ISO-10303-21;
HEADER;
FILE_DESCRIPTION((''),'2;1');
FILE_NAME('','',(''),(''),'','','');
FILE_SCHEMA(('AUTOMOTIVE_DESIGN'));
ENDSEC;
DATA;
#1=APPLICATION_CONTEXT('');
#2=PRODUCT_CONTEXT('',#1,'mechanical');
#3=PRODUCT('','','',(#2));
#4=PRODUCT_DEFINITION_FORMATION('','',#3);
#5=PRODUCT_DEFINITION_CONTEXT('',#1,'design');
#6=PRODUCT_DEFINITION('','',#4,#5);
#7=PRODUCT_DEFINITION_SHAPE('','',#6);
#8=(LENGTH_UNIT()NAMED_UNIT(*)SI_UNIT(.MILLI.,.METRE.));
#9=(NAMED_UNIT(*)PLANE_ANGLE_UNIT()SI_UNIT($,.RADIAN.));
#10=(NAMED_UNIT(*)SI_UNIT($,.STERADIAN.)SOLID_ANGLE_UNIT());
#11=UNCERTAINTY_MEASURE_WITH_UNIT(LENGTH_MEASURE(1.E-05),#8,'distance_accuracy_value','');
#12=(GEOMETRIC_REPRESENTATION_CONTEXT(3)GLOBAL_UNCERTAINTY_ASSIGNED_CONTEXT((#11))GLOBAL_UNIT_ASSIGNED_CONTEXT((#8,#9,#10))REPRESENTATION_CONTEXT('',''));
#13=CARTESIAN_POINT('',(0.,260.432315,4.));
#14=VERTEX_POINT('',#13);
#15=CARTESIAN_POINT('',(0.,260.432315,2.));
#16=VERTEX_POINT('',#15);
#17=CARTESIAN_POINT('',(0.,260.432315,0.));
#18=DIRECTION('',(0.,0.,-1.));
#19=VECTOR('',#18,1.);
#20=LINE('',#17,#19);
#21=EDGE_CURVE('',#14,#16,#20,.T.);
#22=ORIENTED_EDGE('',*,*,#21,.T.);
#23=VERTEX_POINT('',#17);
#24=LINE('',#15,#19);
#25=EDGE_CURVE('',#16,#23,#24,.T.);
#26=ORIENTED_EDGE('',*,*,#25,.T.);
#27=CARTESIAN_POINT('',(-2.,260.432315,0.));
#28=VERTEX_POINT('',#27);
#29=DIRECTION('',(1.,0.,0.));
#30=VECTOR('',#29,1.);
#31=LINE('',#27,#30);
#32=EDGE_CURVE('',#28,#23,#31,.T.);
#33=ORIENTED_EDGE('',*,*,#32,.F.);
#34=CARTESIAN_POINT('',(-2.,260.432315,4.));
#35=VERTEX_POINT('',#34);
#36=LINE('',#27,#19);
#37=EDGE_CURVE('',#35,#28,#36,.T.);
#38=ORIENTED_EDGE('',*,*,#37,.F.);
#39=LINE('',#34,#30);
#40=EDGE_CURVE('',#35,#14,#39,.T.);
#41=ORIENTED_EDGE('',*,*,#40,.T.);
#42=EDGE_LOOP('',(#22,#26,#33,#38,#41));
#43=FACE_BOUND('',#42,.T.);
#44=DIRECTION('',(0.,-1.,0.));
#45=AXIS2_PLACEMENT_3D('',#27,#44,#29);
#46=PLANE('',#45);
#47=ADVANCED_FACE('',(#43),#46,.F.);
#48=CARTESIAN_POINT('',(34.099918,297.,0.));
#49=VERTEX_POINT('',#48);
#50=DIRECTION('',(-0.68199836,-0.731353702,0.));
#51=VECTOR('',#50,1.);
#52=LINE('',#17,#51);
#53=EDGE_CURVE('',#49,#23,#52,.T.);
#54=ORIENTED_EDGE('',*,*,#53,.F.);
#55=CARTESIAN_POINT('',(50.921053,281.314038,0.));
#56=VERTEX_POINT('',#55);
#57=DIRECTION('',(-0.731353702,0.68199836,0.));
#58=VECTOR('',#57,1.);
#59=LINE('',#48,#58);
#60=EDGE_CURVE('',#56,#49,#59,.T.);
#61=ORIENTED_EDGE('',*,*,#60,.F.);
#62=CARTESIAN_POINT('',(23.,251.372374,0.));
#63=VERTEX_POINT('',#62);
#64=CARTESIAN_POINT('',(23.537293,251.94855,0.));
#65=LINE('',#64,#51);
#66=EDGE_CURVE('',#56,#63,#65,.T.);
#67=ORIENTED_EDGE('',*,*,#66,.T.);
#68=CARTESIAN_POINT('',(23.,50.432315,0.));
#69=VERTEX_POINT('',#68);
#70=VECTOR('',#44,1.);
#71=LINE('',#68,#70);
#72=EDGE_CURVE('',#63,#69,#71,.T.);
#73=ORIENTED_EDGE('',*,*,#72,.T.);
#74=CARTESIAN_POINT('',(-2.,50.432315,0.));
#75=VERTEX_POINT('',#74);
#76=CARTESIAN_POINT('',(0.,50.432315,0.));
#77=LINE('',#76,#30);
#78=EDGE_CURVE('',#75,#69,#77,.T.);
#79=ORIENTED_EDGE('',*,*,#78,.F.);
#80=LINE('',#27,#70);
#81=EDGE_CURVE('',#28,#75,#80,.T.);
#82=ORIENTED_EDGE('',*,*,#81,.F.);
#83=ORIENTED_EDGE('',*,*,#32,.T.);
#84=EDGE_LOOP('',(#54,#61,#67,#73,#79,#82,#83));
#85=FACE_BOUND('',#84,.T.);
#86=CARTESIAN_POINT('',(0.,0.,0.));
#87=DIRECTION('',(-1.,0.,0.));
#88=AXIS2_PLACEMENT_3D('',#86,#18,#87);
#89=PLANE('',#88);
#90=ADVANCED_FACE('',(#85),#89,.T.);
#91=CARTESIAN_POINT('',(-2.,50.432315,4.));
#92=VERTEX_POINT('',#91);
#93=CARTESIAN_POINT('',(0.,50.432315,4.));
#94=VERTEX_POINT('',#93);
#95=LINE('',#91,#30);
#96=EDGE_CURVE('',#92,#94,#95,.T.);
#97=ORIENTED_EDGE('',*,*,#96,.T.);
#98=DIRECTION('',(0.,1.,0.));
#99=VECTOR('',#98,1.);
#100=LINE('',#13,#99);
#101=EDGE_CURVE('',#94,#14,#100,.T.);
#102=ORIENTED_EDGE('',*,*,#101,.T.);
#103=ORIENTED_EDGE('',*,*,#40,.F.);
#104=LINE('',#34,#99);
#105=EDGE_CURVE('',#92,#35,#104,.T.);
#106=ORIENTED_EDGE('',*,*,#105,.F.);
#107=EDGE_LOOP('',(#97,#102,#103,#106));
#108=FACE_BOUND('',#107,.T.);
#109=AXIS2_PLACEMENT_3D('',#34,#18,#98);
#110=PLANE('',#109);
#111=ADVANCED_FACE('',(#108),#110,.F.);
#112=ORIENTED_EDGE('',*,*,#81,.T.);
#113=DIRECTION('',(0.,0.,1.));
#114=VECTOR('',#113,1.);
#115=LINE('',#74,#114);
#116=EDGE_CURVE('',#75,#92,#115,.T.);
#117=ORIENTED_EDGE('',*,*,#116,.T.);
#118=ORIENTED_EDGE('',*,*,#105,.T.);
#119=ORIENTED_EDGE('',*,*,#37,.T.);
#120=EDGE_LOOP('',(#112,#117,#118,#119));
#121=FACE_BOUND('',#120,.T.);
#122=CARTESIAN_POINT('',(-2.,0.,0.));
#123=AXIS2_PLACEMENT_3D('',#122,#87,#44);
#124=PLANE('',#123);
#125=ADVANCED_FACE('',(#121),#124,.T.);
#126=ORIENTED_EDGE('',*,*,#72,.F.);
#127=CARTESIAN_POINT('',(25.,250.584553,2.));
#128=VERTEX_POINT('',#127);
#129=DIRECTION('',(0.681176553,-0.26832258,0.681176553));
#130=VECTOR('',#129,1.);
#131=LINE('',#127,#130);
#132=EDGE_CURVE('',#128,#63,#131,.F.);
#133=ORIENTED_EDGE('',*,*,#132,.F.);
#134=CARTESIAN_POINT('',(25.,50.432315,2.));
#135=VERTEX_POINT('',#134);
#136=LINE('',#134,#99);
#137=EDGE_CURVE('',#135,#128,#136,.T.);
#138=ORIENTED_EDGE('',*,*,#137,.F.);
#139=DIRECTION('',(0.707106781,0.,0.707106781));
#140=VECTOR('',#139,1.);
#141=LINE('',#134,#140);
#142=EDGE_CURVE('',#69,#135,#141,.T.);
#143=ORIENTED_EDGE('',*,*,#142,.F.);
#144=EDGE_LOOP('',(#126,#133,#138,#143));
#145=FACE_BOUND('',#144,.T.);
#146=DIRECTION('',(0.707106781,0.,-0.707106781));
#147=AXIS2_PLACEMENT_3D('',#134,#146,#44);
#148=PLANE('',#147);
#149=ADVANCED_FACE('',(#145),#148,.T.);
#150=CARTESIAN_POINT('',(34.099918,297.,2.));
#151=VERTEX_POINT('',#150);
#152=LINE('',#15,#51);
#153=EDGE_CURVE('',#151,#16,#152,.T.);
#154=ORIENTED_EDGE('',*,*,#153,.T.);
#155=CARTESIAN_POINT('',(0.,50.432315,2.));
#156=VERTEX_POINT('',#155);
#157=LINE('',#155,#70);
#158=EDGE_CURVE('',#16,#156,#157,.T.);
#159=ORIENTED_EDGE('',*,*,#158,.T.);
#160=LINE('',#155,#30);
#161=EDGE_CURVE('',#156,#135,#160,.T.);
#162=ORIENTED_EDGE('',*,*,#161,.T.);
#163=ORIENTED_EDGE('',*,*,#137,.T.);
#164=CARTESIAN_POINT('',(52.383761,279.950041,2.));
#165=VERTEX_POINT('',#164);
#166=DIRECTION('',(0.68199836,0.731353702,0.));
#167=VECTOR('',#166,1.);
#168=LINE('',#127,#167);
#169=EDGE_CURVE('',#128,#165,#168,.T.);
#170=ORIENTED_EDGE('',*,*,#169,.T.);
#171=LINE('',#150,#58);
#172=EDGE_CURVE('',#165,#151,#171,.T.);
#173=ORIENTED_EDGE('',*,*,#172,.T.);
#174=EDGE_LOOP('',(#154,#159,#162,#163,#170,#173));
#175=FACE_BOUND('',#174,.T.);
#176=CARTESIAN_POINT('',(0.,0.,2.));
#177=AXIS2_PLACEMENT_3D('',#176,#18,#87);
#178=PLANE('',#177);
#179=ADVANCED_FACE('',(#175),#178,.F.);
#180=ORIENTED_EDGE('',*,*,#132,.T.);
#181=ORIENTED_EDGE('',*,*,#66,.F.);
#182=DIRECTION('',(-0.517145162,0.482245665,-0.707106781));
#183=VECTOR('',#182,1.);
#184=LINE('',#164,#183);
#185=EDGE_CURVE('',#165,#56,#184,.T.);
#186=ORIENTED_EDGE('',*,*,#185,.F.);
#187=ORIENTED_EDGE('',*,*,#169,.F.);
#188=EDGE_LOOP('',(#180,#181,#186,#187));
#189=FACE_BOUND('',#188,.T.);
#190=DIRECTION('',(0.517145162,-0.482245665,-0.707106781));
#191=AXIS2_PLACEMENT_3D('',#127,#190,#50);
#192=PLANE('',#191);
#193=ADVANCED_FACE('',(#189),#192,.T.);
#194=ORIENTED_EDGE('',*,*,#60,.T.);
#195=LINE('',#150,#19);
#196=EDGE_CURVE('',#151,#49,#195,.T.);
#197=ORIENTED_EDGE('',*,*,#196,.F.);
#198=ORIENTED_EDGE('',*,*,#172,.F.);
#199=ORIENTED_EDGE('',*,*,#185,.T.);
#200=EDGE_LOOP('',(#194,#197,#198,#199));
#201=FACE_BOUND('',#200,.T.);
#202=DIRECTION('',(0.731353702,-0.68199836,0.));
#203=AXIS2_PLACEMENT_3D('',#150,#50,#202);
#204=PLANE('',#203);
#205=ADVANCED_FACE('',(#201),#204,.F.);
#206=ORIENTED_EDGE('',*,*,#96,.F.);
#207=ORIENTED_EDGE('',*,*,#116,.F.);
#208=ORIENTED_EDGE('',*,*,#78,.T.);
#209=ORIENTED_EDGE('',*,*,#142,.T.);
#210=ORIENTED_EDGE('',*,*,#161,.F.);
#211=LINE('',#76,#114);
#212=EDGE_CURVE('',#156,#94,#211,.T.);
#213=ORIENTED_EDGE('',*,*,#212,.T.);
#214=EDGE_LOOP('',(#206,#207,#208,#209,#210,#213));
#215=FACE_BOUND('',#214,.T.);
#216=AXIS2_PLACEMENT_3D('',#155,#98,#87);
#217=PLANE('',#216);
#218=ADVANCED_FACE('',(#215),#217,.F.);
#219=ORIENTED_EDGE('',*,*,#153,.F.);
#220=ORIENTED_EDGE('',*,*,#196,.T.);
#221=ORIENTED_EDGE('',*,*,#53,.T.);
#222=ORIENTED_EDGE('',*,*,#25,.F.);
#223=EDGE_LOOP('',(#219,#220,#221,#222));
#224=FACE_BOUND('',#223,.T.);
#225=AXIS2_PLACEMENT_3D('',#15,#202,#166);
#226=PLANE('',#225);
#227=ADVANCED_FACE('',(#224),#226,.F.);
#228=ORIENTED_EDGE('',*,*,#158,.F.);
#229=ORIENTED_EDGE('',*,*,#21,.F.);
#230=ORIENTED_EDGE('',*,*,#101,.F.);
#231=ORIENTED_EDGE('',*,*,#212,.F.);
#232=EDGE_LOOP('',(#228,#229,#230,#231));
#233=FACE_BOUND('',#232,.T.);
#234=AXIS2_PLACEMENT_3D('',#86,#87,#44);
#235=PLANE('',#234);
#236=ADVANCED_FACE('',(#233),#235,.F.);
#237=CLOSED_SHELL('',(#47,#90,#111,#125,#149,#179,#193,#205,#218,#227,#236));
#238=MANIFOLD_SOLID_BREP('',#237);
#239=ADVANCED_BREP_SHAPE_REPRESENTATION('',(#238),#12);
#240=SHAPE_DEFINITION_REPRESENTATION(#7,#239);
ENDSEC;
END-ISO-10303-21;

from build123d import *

# Parameters (mm, degrees)
BOSS_EXTRUDE1_DEPTH = 2
SKETCH4_W           = 4
SKETCH4_H           = 210
BOSS_EXTRUDE2_DEPTH = 2
CHAMFER1_SIZE       = 2


with BuildPart() as part:
    # Sketch3 → Boss-Extrude1 (new body)
    with BuildSketch(Plane.XY):
        Polygon((0, 50.432314919), (25, 50.432314919), (25, 250.584553029), (52.383760544, 279.950040998), (34.099918003, 297), (0, 260.432314919), align=None)
    extrude(amount=BOSS_EXTRUDE1_DEPTH)

    # Sketch4 → Boss-Extrude2 (add)
    with BuildSketch(Plane.ZY):
        with Locations((2, 155.432314919)):
            Rectangle(SKETCH4_W, SKETCH4_H)
    extrude(amount=BOSS_EXTRUDE2_DEPTH)

    # Chamfer1
    chamfer1_edges = [part.edges().sort_by_distance(p)[0] for p in [
        (38.691880272, 265.267297014, 0),
        (25, 150.508433974, 0),
    ]]
    chamfer(chamfer1_edges, length=CHAMFER1_SIZE - 0.0001)  # a hair under: the kernel refuses the full size


solid = part.part
